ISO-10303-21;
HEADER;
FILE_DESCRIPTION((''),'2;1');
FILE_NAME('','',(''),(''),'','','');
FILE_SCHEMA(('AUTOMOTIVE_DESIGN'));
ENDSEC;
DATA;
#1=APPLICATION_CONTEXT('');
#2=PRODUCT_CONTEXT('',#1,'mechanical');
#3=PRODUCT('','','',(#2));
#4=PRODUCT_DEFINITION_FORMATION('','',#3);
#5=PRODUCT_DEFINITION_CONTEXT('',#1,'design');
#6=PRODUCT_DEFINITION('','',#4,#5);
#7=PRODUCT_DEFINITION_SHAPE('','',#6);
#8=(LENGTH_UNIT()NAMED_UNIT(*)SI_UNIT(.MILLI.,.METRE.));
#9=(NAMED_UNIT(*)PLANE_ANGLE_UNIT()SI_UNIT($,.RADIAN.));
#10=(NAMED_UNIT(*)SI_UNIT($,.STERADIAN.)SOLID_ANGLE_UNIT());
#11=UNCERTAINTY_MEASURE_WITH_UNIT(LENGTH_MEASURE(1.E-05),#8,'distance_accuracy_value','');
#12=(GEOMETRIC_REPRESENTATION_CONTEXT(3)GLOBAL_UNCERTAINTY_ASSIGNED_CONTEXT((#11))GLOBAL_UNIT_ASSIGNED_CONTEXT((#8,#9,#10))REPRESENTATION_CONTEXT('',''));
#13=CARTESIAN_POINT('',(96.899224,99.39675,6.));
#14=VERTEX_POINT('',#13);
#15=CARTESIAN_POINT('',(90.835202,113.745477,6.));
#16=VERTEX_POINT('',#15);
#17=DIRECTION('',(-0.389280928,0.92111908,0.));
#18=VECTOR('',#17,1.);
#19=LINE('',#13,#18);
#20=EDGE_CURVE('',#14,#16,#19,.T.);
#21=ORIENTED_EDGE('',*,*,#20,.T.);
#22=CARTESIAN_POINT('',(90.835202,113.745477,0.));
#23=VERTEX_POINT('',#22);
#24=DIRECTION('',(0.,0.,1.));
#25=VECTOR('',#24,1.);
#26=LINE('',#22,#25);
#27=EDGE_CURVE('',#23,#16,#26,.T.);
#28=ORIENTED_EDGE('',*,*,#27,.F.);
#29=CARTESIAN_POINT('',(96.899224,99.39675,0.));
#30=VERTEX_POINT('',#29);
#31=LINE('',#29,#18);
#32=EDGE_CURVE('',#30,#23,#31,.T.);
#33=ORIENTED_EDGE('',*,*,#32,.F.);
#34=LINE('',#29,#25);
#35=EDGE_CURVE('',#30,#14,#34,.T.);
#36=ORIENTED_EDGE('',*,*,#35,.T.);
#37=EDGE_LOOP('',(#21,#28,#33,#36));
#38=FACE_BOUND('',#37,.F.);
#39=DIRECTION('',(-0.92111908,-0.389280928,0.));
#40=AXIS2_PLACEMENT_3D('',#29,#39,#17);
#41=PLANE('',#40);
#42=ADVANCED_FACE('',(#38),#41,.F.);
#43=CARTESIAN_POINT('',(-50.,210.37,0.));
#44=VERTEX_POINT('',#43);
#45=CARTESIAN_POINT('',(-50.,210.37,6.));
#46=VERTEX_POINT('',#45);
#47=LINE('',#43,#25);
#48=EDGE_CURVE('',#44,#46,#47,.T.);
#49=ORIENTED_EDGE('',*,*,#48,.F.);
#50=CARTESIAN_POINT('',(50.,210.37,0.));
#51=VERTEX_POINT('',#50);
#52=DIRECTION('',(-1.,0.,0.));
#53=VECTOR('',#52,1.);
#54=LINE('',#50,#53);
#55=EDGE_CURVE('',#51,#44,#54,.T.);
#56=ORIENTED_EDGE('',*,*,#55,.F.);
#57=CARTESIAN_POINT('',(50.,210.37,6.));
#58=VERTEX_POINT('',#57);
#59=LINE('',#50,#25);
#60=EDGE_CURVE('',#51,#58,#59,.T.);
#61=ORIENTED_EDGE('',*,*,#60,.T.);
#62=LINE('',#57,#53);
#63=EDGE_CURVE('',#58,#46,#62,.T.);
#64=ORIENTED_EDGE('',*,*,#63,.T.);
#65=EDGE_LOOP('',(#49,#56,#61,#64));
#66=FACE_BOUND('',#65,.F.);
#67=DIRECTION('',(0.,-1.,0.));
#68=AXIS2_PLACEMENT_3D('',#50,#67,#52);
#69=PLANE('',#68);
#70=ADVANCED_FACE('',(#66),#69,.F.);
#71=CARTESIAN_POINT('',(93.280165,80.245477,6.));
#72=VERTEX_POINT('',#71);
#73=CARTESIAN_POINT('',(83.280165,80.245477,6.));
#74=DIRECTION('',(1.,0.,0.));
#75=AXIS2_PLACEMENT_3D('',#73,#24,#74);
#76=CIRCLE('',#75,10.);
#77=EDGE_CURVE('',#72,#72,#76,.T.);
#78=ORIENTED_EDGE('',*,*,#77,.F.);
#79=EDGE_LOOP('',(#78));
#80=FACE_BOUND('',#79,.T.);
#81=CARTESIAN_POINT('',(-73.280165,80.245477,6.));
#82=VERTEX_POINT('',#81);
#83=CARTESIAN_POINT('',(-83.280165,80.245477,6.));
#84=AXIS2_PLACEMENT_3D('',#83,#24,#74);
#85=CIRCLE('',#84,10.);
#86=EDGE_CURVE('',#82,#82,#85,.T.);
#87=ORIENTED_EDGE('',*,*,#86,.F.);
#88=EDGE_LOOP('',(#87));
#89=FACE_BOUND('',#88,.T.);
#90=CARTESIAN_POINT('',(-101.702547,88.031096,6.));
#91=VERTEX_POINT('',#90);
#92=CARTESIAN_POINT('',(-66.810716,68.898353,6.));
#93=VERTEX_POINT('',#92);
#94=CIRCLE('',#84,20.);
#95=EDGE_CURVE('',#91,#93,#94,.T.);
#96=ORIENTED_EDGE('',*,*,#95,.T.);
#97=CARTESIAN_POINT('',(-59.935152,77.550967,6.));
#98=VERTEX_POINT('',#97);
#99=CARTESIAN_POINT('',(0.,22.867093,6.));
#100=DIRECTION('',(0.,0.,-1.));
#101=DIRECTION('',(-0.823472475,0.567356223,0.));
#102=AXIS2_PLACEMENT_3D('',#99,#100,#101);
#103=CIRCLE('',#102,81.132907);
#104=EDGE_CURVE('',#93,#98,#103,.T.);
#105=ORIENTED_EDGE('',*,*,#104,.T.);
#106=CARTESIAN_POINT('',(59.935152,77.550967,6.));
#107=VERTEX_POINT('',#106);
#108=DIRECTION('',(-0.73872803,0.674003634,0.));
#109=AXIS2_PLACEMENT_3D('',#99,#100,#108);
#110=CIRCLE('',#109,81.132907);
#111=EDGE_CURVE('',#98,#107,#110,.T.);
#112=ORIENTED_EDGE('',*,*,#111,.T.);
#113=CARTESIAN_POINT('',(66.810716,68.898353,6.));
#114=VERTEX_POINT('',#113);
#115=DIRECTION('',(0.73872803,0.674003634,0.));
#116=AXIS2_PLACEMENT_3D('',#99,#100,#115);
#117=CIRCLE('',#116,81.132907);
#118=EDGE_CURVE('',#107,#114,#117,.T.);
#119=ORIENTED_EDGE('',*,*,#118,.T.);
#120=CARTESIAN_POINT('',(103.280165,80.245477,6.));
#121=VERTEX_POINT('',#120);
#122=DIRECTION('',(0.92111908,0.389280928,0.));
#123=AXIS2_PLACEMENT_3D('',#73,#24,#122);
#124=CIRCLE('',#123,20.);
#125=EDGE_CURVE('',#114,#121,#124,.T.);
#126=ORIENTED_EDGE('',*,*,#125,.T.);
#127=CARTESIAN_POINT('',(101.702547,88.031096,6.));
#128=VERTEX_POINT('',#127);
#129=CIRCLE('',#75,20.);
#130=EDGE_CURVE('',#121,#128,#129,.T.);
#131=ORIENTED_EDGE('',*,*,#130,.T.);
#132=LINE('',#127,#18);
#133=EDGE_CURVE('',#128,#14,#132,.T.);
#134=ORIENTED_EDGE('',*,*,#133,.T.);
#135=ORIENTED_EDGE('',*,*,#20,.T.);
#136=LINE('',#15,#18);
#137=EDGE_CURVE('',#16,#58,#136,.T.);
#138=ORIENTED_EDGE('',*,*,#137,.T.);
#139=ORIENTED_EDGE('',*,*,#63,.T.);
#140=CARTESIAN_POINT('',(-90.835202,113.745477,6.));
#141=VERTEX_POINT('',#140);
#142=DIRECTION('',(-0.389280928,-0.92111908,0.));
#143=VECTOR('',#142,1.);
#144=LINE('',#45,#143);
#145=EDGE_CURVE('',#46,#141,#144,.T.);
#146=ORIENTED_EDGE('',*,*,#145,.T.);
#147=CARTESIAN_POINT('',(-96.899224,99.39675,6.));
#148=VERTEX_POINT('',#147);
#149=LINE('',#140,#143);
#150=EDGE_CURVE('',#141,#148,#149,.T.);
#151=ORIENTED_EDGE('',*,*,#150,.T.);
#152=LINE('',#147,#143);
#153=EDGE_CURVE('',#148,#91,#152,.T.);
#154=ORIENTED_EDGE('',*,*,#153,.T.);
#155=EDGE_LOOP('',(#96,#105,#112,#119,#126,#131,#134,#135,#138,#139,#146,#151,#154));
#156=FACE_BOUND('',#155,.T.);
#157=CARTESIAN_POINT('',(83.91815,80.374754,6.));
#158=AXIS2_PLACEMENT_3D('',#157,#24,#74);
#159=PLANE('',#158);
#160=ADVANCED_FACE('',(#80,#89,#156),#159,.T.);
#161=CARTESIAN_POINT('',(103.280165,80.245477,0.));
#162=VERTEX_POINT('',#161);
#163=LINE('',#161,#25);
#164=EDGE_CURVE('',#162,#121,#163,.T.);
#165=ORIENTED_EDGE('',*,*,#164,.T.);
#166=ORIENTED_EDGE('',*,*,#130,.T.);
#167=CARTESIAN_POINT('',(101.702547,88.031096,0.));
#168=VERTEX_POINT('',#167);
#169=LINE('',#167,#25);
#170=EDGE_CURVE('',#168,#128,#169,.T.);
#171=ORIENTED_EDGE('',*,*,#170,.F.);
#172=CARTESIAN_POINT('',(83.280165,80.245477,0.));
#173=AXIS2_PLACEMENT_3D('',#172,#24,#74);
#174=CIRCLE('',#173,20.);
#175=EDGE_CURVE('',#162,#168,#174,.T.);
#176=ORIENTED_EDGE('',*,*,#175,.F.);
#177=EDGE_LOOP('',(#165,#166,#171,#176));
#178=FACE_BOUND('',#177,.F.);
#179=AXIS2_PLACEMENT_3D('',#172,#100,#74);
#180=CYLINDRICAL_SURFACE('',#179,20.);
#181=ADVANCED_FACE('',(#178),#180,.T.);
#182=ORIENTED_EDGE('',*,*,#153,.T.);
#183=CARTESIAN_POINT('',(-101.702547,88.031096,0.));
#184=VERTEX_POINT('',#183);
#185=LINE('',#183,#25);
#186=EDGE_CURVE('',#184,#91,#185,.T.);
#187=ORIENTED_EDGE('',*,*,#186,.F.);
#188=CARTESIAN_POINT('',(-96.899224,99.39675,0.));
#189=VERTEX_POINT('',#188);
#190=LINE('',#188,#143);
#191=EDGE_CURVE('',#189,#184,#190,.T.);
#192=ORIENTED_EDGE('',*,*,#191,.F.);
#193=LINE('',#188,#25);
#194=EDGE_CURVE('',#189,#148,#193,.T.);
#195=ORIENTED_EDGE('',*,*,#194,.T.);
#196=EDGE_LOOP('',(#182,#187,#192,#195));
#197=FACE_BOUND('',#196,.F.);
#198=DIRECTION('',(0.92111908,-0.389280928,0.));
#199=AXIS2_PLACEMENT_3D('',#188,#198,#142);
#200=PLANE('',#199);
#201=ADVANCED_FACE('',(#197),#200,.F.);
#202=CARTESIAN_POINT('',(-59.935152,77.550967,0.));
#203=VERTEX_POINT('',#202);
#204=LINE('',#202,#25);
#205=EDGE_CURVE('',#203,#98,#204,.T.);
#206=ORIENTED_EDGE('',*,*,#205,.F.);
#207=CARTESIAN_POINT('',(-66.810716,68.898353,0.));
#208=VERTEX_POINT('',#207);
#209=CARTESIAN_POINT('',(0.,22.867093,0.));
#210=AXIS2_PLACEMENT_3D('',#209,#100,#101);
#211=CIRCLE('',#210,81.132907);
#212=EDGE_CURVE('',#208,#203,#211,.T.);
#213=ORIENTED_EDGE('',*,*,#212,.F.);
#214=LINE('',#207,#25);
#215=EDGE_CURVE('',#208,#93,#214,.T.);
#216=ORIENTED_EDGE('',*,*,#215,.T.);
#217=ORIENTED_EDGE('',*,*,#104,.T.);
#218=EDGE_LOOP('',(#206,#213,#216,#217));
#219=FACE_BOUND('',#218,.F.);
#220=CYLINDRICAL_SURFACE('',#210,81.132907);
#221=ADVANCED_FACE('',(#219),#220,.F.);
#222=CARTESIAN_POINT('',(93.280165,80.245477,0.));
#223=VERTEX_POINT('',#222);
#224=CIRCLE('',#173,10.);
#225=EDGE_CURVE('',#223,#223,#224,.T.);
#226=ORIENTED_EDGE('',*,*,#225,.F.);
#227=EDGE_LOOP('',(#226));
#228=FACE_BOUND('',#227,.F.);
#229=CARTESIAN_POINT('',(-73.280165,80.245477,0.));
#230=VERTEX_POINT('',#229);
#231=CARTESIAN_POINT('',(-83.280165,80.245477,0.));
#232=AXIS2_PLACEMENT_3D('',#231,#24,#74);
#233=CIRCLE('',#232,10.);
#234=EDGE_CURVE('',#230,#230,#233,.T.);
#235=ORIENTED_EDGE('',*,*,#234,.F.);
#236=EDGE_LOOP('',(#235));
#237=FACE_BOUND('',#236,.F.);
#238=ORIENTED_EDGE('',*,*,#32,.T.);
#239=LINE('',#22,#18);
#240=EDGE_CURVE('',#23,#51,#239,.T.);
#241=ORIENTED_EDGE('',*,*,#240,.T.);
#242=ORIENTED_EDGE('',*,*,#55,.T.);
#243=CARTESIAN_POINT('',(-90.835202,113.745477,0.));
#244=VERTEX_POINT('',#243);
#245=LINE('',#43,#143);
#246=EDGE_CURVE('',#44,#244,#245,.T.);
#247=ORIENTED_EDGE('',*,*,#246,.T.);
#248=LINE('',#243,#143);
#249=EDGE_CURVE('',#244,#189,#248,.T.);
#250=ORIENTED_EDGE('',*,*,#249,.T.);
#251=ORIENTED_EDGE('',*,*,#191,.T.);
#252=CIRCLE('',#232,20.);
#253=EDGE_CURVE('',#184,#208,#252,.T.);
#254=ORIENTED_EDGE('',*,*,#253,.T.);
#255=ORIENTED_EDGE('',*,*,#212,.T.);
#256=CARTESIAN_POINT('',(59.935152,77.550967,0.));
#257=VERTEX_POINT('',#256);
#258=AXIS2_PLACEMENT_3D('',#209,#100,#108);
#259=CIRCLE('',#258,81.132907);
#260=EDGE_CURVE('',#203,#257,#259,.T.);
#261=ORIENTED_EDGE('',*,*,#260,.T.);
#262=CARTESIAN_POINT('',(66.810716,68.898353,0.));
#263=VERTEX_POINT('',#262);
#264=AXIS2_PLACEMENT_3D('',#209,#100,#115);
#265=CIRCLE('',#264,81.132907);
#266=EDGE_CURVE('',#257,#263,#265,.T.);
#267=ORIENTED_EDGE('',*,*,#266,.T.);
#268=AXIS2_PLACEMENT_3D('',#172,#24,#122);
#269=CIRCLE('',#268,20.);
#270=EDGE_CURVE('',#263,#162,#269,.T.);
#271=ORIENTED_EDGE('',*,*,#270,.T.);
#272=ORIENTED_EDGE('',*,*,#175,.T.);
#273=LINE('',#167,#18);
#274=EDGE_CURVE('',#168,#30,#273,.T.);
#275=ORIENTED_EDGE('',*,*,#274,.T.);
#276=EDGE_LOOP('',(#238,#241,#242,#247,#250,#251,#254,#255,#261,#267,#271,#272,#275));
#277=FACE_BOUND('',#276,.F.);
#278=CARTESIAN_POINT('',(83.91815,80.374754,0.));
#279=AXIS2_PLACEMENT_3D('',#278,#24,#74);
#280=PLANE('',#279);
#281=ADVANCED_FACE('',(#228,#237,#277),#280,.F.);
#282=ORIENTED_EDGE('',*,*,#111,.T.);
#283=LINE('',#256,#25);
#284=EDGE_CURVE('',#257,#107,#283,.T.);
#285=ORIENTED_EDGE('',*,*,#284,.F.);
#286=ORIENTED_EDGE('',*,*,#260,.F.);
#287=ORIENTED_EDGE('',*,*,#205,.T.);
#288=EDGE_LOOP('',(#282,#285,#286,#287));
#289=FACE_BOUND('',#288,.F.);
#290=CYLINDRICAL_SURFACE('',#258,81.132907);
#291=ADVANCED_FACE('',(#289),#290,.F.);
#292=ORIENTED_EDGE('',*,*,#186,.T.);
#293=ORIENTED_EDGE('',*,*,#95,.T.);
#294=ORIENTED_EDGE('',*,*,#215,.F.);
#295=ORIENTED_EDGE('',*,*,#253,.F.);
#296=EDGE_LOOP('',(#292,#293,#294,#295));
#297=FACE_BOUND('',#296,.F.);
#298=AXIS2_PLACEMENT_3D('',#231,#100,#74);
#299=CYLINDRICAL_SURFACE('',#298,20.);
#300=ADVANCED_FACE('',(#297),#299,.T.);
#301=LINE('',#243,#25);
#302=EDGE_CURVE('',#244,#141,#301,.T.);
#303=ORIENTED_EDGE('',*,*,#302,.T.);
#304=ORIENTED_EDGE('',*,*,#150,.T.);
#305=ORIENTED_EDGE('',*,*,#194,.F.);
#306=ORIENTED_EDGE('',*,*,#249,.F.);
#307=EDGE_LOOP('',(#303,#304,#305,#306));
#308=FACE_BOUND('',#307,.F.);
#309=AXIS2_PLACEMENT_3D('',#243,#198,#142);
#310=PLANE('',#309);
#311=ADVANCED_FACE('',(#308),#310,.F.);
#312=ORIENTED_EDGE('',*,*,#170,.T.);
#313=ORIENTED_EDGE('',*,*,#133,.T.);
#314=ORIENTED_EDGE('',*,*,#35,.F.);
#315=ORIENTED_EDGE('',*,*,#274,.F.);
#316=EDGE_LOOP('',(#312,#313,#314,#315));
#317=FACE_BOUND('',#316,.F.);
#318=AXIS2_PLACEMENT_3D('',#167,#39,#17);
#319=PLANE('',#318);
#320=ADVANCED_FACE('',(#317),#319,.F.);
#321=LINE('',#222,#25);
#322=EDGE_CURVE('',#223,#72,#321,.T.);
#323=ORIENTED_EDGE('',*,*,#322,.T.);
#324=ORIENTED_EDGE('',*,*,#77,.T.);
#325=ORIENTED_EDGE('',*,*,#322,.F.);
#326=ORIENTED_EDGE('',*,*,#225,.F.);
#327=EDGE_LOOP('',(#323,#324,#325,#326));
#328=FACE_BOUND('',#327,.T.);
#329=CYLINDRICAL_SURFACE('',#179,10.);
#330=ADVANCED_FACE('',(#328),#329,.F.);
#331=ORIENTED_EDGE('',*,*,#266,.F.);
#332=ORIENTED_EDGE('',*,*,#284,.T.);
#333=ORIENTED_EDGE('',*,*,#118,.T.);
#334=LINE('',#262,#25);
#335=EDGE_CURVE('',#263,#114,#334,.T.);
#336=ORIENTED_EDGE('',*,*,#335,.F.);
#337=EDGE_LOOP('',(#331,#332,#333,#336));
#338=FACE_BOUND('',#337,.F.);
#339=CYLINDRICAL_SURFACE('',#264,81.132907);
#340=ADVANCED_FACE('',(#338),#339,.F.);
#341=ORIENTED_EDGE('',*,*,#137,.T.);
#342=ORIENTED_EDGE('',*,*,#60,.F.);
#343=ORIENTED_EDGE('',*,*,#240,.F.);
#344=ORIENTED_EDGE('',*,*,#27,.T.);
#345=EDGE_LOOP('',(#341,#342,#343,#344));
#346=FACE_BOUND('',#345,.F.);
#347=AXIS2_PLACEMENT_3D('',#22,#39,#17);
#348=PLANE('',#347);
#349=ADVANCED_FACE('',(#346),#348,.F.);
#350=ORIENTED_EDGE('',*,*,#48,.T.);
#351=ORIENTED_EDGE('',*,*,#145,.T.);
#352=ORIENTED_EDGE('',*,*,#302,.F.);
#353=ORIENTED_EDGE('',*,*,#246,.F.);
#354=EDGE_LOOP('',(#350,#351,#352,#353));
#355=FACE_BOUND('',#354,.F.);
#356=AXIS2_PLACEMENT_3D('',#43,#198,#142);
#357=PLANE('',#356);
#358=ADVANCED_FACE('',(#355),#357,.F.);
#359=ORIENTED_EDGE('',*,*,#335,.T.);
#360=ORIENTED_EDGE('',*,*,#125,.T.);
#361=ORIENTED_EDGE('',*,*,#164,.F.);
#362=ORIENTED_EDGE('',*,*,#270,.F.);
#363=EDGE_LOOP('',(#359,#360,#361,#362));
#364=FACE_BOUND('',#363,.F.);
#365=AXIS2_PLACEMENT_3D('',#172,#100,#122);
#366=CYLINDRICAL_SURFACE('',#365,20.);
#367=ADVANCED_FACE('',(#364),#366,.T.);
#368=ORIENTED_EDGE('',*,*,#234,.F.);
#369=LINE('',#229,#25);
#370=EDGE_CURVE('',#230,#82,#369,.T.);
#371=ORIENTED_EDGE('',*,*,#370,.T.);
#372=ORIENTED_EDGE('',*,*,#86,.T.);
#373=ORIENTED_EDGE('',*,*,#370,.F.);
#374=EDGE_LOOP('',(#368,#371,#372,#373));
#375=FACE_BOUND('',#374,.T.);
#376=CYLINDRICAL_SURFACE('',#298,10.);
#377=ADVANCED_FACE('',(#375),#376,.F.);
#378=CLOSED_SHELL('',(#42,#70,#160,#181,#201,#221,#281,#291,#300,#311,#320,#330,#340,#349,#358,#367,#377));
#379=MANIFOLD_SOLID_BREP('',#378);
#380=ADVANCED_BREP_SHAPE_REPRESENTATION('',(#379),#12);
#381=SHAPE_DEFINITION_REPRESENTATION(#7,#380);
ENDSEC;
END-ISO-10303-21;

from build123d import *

# Parameters (mm, degrees)
F0_R     = 10
F1_DEPTH = 6


with BuildPart() as f1:
    # F0 (on Top) → F1 (new body)
    with BuildSketch(Plane.XY):
        with BuildLine():
            ThreePointArc((66.8107155763, 68.8983527146), (89.2220086446, 61.1485010982), (103.2801650714, 80.2454771665))
            ThreePointArc((103.2801650714, 80.2454771665), (102.8817929615, 84.2174016446), (101.7025466654, 88.0310957293))
            ThreePointArc((101.7025466654, 88.0310957293), (73.6640874011, 97.7820404055), (66.8107155763, 68.8983527146))
        make_face()
        with Locations((83.2801650714, 80.2454771665)):
            Circle(F0_R, mode=Mode.SUBTRACT)
        with BuildLine():
            ThreePointArc((66.8107155763, 68.8983527146), (73.6640874011, 97.7820404055), (101.7025466654, 88.0310957293))
            Line((101.7025466654, 88.0310957293), (96.8992238213, 99.3967496769))
            ThreePointArc((96.8992238213, 99.3967496769), (71.3236564608, 100.476441104), (59.9351524158, 77.550967172))
            ThreePointArc((59.9351524158, 77.550967172), (63.5204352748, 73.3418677958), (66.8107155763, 68.8983527146))
        make_face()
        with BuildLine():
            ThreePointArc((59.9351524158, 77.550967172), (71.3236564608, 100.476441104), (96.8992238213, 99.3967496769))
            Line((96.8992238213, 99.3967496769), (90.8352022654, 113.7454771665))
            Line((90.8352022654, 113.7454771665), (-90.8352022654, 113.7454771665))
            Line((-90.8352022654, 113.7454771665), (-96.8992238213, 99.3967496769))
            ThreePointArc((-96.8992238213, 99.3967496769), (-72.5051449003, 101.1296563534), (-59.7801650714, 80.2454771665))
            ThreePointArc((-59.7801650714, 80.2454771665), (-59.8189439032, 78.8959953041), (-59.9351524158, 77.550967172))
            ThreePointArc((-59.9351524158, 77.550967172), (0, 104), (59.9351524158, 77.550967172))
        make_face()
        with BuildLine():
            ThreePointArc((-66.8107155763, 68.8983527146), (-63.5204352748, 73.3418677958), (-59.9351524158, 77.550967172))
            ThreePointArc((-59.9351524158, 77.550967172), (-59.8189439032, 78.8959953041), (-59.7801650714, 80.2454771665))
            ThreePointArc((-59.7801650714, 80.2454771665), (-72.5051449003, 101.1296563534), (-96.8992238213, 99.3967496769))
            Line((-96.8992238213, 99.3967496769), (-101.7025466654, 88.0310957293))
            ThreePointArc((-101.7025466654, 88.0310957293), (-79.3082405933, 99.8471050565), (-63.2801650714, 80.2454771665))
            ThreePointArc((-63.2801650714, 80.2454771665), (-64.1831890032, 74.3036335933), (-66.8107155763, 68.8983527146))
        make_face()
        with BuildLine():
            ThreePointArc((-101.7025466654, 88.0310957293), (-92.8962427418, 62.7089139274), (-66.8107155763, 68.8983527146))
            ThreePointArc((-66.8107155763, 68.8983527146), (-64.1831890032, 74.3036335933), (-63.2801650714, 80.2454771665))
            ThreePointArc((-63.2801650714, 80.2454771665), (-79.3082405933, 99.8471050565), (-101.7025466654, 88.0310957293))
        make_face()
        with Locations((-83.2801650714, 80.2454771665)):
            Circle(F0_R, mode=Mode.SUBTRACT)
        Polygon((-90.8352022654, 113.7454771665), (90.8352022654, 113.7454771665), (50, 210.37), (0, 210.37), (-50, 210.37), align=None)
    extrude(amount=F1_DEPTH)


solid = f1.part
